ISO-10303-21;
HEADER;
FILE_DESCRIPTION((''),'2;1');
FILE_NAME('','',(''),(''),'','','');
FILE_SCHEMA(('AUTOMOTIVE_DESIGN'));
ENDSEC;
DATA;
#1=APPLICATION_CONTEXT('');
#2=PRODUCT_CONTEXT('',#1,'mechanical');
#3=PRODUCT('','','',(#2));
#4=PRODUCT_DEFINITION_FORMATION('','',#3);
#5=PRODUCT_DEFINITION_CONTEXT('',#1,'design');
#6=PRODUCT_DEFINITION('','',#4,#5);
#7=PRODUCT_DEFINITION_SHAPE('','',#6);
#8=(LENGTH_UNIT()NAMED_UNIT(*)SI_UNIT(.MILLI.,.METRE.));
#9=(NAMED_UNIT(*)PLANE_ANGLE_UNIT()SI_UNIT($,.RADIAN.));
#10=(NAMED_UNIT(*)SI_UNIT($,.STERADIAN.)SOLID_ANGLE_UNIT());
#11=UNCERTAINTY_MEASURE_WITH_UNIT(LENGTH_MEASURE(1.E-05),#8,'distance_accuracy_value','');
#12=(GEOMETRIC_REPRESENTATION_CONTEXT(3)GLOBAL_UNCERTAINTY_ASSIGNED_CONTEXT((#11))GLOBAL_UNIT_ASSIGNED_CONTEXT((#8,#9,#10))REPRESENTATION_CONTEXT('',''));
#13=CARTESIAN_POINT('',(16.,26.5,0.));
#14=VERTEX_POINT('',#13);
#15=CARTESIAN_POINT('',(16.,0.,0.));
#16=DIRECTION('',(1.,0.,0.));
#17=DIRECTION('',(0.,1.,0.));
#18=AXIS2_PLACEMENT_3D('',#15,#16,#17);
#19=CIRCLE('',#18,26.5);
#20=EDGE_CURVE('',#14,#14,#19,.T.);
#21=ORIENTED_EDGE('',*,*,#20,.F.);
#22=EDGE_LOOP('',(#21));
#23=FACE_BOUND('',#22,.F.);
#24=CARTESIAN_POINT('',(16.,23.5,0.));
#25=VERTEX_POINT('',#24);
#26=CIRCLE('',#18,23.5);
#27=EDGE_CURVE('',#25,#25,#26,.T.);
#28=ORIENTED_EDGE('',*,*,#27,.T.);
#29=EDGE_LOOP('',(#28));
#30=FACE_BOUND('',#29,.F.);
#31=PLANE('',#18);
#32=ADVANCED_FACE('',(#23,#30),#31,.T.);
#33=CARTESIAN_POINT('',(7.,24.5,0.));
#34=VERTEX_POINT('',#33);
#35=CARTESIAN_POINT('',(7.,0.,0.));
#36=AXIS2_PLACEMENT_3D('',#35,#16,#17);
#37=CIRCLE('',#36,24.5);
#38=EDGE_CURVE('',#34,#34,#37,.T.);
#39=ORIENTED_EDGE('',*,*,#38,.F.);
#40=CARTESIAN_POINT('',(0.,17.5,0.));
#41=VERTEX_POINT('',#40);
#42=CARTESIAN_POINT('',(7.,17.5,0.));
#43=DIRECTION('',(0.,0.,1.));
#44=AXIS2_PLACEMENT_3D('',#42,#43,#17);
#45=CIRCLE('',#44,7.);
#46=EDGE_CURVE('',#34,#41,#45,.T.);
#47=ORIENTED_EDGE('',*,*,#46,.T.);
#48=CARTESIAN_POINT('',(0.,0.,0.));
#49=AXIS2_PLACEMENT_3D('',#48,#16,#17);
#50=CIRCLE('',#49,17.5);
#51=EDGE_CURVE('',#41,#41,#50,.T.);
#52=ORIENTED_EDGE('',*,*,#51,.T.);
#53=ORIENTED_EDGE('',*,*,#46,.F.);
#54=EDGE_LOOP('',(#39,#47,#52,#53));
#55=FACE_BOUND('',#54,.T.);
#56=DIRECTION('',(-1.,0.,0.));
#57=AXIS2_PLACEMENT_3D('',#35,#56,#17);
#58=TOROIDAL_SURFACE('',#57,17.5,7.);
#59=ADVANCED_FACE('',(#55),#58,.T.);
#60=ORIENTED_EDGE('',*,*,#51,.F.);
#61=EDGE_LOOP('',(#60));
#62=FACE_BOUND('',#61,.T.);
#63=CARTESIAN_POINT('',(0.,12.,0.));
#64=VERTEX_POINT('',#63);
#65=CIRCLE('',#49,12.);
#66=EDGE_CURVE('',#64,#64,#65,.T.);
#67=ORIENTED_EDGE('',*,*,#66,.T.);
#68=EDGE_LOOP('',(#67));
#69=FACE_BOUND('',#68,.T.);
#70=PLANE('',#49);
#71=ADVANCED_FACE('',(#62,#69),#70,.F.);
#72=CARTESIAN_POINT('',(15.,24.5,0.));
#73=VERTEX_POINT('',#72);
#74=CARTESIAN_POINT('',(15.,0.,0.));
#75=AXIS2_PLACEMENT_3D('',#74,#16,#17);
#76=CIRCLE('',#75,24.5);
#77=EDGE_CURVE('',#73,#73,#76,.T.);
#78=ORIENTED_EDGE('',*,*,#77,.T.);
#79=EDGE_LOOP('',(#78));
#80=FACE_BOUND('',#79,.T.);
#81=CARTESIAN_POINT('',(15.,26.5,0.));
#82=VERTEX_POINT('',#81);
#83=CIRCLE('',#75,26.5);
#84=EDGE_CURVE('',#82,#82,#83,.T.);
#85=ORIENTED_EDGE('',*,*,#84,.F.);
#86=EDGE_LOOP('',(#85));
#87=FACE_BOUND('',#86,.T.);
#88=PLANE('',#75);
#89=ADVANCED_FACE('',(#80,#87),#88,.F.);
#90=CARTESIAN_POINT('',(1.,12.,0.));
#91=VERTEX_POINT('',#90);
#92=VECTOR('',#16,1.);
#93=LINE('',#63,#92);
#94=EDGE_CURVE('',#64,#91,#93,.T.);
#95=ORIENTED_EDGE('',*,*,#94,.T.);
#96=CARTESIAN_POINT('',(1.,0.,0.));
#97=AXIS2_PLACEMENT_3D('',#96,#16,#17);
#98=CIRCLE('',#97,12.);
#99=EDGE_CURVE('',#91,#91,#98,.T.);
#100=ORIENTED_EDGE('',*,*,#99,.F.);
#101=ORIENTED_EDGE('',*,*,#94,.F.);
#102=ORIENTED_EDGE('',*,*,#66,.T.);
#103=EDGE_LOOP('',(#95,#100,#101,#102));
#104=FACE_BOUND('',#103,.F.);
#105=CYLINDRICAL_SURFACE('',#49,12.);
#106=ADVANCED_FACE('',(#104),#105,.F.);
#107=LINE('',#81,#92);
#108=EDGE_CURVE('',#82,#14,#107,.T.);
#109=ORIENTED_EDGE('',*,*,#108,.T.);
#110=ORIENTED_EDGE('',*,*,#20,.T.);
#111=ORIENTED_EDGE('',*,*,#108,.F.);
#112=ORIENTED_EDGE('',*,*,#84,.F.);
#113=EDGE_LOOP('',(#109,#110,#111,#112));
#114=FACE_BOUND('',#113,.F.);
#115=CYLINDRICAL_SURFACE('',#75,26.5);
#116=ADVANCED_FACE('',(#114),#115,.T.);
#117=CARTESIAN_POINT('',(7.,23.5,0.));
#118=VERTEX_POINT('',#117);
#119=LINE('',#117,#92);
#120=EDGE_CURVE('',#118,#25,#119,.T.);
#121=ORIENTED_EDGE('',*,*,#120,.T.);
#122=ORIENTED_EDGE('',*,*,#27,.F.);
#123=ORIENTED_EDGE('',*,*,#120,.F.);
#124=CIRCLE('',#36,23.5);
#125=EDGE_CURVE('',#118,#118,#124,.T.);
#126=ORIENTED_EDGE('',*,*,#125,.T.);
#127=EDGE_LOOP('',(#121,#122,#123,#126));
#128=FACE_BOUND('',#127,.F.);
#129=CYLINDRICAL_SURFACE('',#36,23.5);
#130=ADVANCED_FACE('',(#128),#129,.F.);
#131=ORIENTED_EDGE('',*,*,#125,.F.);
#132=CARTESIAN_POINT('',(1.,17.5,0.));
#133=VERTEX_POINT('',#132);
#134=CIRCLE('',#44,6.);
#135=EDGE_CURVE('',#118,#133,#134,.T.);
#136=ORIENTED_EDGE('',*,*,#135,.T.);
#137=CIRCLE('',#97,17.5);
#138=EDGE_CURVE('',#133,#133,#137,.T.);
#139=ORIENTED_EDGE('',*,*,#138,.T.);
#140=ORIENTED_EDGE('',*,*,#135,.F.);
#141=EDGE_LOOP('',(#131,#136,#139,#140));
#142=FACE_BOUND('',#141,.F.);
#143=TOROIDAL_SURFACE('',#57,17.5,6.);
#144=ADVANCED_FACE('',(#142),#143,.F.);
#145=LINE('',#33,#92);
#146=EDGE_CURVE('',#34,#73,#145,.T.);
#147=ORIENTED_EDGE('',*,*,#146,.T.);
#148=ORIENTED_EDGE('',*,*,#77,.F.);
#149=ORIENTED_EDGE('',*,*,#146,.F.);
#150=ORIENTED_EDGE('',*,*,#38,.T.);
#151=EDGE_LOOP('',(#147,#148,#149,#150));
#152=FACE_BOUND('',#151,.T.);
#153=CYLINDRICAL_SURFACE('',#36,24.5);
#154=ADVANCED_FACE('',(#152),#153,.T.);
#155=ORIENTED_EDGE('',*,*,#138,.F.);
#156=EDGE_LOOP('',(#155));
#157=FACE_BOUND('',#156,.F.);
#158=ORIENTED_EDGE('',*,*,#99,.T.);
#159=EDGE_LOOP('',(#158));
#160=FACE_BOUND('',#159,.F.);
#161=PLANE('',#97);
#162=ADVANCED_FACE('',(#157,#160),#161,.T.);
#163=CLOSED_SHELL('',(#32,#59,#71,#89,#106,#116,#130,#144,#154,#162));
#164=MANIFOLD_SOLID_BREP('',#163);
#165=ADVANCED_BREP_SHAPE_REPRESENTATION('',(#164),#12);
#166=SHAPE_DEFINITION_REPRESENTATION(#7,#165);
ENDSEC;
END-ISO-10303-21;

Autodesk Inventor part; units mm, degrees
ref_plane "YZ Plane" through (0, 0, 0) normal (1, 0, 0) x (0, 1, 0)
ref_plane "XZ Plane" through (0, 0, 0) normal (0, 1, 0) x (-1, 0, 0)
ref_plane "XY Plane" through (0, 0, 0) normal (0, 0, 1) x (1, 0, 0)
sketch "Boceto1" plane through (0, 0, 0) normal (0, 0, 1) x (1, 0, 0)
  line L0 (0, 12) -> (0, 17.5)
  arc A0 (7, 24.5) -> (0, 17.5) centre (7, 17.5) ccw
  line L1 (7, 24.5) -> (15, 24.5)
  line L2 (15, 24.5) -> (15, 26.5)
  line L3 (0, 0) -> (11, 0)
  dimension "d0" = 49
  dimension "d1" = 15
  dimension "d2" = 2
  dimension "d3" = 7
  dimension "d4" = 12
surface revolve "SuperficieRevolución1" sketch "Boceto1" angle 360 about axis through (0, 0, 0) along (1, 0, 0) shown yes curves L2 L1 A0 L0
thicken "Engrosado1" operation new thickness 1 both sides no extend neighbours no toward (1, 0, 0) faces at (15, 25.5767, -2.114) (12.3333, 24.4206, -1.9714) (6.4769, 24.1634, -3.9269) (0, 15.4972, -1.396)
properties part number "cazoleta"
